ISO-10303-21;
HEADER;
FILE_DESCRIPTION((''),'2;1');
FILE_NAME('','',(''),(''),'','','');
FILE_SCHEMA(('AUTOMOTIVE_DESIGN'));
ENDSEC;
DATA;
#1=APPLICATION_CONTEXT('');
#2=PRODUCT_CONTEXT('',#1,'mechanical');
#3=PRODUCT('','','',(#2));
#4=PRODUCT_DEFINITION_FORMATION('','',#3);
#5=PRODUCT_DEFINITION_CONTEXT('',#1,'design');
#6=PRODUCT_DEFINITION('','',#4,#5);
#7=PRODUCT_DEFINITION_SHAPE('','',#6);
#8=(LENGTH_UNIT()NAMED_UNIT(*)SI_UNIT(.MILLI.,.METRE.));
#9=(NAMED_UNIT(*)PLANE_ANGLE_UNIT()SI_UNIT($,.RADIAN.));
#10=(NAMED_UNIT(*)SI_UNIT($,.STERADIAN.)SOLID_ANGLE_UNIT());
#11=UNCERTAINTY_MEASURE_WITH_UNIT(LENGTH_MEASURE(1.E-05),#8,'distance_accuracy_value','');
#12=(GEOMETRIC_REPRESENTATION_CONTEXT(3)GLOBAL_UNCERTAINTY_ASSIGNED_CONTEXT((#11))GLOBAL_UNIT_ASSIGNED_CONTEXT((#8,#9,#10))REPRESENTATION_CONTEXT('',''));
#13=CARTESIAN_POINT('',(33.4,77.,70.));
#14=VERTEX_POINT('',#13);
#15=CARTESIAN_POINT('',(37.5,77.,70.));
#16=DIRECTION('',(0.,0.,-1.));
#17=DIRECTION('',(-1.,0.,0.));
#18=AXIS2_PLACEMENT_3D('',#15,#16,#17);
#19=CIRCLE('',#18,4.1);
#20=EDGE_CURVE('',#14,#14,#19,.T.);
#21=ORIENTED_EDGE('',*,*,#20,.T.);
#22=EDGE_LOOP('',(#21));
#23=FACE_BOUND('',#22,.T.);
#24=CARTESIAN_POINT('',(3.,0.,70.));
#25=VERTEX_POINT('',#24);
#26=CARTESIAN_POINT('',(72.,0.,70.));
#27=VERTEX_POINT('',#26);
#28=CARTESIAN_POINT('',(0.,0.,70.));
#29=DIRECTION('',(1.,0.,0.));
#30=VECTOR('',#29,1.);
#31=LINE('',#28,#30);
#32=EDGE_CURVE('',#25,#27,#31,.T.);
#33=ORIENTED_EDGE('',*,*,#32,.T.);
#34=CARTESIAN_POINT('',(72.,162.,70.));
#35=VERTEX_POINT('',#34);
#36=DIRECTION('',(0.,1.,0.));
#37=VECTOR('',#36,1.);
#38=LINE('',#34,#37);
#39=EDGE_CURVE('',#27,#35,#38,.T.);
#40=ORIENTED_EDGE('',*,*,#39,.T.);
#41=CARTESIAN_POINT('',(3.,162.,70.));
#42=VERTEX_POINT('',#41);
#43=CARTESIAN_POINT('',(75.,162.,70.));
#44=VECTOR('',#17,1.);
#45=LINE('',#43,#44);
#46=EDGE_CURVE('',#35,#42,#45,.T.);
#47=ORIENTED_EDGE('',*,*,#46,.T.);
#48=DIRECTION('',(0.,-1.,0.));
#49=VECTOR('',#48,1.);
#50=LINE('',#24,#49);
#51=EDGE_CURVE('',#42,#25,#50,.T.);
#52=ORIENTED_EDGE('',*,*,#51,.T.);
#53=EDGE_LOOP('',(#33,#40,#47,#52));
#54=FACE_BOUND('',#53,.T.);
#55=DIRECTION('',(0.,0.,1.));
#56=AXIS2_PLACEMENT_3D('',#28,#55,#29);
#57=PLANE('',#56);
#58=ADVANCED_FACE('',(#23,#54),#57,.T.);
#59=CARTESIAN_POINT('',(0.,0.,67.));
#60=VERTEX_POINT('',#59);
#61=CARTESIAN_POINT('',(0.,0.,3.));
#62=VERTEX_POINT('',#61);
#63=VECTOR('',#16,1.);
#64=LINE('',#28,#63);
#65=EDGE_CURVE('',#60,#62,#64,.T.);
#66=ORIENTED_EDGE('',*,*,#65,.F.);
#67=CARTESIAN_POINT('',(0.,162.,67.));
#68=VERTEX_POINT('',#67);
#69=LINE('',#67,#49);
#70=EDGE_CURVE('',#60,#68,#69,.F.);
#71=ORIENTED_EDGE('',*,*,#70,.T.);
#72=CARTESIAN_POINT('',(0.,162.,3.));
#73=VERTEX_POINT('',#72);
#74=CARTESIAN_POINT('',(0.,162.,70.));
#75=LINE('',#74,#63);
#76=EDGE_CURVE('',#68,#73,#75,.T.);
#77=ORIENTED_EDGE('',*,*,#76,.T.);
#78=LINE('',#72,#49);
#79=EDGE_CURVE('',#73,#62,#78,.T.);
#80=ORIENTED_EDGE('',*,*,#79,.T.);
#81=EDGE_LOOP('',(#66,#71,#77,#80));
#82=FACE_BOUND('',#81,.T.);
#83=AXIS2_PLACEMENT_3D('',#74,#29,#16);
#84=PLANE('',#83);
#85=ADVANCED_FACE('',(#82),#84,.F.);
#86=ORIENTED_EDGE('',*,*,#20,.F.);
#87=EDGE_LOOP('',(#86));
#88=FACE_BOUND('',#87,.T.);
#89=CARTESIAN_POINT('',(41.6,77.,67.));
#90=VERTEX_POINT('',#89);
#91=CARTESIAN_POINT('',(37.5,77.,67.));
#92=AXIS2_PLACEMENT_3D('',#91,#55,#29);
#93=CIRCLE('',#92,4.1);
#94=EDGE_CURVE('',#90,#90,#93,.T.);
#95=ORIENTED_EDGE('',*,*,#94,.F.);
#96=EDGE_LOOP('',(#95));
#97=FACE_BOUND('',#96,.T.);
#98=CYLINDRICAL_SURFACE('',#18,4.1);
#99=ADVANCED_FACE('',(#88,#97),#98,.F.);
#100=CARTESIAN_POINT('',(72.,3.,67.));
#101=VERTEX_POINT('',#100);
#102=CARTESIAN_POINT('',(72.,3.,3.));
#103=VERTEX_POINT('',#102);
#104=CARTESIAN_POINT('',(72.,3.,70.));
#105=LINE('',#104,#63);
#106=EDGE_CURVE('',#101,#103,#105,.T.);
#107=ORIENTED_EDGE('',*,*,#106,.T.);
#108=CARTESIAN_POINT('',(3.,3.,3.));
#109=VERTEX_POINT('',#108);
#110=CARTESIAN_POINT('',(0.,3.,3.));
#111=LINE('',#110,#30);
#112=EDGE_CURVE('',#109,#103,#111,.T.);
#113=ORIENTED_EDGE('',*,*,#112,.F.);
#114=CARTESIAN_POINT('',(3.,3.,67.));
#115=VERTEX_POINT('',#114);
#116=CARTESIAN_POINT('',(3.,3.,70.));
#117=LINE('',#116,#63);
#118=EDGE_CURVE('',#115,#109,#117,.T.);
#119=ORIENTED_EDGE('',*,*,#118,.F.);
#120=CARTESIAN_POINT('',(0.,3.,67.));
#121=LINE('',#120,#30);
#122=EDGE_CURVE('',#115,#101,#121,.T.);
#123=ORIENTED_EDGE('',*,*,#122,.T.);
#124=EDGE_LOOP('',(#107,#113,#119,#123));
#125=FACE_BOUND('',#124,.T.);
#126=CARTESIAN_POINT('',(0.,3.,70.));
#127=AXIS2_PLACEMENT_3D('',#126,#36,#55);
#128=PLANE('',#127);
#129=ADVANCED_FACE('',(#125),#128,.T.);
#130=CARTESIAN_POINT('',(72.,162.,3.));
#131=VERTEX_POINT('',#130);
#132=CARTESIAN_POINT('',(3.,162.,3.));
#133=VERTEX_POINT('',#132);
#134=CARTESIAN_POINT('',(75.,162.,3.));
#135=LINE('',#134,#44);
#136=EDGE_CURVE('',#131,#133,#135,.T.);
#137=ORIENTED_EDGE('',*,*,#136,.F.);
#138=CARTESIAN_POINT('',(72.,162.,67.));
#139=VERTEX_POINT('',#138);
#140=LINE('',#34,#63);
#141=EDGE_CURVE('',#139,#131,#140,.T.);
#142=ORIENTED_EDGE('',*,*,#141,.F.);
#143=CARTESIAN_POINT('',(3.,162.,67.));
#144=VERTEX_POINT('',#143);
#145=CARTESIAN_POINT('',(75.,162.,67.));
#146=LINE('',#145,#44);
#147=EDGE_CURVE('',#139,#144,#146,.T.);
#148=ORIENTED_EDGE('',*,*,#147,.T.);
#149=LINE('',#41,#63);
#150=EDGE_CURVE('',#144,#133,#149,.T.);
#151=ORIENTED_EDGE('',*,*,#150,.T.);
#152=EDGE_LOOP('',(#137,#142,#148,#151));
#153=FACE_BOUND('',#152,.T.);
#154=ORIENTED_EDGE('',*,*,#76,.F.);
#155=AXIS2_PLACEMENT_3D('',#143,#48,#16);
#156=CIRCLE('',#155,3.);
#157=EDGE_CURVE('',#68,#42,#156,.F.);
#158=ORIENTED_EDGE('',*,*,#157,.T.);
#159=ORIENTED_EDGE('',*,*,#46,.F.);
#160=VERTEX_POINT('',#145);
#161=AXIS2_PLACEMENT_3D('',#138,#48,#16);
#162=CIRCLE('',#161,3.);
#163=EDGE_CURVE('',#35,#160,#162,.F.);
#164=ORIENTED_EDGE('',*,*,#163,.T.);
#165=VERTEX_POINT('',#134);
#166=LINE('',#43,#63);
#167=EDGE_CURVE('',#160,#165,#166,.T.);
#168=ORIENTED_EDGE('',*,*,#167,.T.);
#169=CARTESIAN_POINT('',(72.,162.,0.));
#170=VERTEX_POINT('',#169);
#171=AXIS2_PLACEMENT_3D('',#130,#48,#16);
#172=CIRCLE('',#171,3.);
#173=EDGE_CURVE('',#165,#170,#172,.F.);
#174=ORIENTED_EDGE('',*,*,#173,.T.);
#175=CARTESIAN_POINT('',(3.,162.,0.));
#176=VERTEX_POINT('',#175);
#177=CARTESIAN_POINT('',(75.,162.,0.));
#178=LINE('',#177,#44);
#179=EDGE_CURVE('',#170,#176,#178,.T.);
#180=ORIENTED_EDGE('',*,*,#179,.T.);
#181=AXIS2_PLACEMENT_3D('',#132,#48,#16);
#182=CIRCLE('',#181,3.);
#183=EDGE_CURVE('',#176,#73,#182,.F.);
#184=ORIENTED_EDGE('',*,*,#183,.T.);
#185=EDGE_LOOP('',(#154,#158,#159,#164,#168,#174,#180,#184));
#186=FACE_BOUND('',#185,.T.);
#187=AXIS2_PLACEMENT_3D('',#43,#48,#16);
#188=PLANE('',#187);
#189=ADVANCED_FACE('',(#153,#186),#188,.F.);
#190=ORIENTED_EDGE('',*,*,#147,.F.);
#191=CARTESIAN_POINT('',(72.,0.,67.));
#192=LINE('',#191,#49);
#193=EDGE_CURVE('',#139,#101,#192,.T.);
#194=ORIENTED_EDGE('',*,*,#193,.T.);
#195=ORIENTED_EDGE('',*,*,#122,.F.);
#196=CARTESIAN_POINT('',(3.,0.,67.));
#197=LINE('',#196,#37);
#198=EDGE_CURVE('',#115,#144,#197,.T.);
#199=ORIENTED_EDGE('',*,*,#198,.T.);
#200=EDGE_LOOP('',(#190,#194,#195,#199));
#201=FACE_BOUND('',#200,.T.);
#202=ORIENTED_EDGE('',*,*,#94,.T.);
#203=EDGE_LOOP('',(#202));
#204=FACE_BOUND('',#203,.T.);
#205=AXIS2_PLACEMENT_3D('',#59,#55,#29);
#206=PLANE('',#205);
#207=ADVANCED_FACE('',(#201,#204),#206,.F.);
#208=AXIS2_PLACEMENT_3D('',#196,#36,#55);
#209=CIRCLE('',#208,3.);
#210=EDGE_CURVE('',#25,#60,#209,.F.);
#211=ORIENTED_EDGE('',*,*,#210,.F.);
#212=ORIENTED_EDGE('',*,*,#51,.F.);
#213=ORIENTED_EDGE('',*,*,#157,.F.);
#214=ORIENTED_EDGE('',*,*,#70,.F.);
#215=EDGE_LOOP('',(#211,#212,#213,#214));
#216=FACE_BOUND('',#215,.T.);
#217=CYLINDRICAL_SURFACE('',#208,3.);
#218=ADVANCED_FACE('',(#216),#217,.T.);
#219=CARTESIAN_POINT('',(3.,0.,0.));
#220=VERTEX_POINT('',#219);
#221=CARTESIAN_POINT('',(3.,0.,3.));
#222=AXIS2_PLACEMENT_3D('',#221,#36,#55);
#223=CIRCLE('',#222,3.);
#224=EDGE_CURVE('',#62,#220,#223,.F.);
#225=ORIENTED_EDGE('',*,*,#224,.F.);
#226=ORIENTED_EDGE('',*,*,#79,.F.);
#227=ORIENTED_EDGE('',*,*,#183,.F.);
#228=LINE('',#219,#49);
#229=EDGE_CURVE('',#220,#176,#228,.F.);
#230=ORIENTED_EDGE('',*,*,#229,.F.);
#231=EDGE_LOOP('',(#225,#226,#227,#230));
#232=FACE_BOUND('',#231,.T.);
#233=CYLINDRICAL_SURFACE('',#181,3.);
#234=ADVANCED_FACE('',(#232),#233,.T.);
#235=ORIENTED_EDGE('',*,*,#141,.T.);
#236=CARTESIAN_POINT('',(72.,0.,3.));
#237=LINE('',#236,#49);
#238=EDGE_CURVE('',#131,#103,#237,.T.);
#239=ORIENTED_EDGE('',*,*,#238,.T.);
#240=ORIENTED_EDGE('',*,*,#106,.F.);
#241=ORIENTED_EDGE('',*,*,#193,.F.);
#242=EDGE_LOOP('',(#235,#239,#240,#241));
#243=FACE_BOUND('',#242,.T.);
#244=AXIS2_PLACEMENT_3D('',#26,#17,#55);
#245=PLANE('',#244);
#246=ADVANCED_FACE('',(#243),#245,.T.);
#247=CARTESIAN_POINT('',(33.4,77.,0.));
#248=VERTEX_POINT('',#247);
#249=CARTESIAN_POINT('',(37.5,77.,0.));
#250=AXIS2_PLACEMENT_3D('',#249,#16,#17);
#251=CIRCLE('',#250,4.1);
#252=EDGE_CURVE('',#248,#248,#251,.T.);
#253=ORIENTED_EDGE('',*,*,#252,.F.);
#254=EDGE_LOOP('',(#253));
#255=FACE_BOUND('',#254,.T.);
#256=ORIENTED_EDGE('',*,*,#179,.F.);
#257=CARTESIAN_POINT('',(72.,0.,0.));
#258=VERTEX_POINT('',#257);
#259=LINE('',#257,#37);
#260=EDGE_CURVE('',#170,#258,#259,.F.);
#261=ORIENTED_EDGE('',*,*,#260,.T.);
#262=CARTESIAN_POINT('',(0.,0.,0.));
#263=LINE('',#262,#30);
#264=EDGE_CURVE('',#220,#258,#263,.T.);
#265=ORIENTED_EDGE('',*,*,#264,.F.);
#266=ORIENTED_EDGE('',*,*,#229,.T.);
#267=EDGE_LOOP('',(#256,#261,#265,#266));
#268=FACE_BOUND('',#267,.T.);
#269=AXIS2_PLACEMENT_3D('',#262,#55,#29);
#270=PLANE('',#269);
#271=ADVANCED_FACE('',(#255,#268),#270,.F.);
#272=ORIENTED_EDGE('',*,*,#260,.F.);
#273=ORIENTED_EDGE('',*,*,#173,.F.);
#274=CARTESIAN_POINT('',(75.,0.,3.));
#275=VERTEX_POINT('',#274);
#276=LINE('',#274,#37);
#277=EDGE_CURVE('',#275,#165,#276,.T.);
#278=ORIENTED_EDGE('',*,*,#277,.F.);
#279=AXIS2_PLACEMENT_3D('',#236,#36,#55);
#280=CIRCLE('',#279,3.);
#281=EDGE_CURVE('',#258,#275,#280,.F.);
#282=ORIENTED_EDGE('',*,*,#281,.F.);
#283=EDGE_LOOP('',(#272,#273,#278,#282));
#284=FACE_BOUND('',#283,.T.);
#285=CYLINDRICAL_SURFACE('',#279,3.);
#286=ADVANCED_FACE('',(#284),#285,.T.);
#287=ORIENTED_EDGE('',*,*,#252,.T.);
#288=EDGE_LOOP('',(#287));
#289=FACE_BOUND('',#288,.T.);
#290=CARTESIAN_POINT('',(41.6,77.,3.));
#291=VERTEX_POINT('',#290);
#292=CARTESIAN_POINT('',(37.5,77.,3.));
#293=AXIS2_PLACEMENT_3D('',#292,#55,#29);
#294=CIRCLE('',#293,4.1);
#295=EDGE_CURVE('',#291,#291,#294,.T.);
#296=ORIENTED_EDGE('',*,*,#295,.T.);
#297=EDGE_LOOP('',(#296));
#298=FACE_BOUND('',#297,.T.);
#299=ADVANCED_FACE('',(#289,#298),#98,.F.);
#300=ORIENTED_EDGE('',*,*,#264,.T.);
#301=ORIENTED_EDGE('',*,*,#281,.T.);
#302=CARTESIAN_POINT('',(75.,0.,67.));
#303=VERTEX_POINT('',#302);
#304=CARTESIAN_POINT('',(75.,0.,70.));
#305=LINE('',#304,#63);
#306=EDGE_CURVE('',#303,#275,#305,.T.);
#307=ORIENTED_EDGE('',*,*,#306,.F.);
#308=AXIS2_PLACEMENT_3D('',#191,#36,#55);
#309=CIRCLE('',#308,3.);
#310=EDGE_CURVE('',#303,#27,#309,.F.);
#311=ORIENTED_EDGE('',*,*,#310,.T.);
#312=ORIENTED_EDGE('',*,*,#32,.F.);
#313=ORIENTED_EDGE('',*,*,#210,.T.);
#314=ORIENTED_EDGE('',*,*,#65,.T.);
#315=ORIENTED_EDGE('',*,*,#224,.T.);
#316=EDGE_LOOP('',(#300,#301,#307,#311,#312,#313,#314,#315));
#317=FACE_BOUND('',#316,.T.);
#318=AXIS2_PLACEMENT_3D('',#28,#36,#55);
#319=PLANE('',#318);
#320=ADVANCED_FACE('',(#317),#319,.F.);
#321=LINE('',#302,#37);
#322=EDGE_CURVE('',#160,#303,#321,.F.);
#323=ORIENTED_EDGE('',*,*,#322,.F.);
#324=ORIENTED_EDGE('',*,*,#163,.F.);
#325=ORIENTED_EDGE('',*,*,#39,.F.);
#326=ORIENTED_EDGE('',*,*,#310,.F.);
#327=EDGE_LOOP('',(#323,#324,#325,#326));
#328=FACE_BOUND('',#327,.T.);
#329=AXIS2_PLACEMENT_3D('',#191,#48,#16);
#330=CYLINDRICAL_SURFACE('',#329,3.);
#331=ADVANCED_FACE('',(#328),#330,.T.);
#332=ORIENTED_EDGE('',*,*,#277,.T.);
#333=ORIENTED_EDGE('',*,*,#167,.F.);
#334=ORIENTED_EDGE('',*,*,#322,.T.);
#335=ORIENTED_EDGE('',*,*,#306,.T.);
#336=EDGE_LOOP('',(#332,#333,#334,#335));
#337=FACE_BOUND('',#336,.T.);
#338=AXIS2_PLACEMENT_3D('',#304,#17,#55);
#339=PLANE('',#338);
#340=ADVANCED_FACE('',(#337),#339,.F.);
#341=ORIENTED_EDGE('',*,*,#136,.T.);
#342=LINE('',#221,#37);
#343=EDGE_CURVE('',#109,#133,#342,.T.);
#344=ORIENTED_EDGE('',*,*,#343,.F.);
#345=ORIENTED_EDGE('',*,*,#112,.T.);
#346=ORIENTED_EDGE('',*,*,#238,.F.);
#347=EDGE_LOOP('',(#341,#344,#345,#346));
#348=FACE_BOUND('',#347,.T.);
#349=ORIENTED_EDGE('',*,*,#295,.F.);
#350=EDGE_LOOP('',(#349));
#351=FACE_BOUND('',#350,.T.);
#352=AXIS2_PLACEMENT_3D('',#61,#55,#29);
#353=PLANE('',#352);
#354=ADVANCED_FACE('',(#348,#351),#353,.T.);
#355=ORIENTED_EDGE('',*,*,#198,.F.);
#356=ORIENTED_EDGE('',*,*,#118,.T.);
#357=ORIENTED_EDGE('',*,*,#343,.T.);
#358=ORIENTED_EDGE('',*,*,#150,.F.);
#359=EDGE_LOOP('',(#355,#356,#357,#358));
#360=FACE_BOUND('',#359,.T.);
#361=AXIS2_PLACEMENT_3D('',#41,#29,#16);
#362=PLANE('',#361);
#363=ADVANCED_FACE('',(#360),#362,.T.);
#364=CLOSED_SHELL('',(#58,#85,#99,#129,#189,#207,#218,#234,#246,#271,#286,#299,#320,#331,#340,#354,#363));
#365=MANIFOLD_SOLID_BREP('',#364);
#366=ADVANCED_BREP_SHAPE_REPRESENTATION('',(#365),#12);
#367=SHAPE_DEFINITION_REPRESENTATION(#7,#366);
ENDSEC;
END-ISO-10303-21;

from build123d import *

# Parameters (mm, degrees)
SKETCH_1_W         = 75
SKETCH_1_H         = 162
BLOCKEXTRUDE_DEPTH = 70
FILLET_2_R         = 3
SHELL_START        = 3
SHELL_1_OUTLINE_W  = 159
SHELL_1_OUTLINE_H  = 64
SHELL_1_DEPTH      = 69
SKETCH_2_R         = 4.1
CABLE_ENTRY_DEPTH  = 192.752444574


# Read off the part's stored shape, not the designer's step: 抽壳1
with BuildPart() as part:
    # 草图1 → BlockExtrude (new body)
    with BuildSketch(Plane.XY):
        with Locations((37.5, 81)):
            Rectangle(SKETCH_1_W, SKETCH_1_H)
    extrude(amount=BLOCKEXTRUDE_DEPTH)

    # Fillet 2
    fillet_2_edges = [part.edges().sort_by_distance(p)[0] for p in [
        (75, 81, 70),
        (0, 81, 70),
        (75, 81, 0),
        (0, 81, 0),
    ]]
    fillet(fillet_2_edges, radius=FILLET_2_R)

    # 抽壳1 outline → 抽壳1 (cut)
    with BuildSketch(Plane.YZ.offset(SHELL_START)):
        with Locations((82.5, 35)):
            Rectangle(SHELL_1_OUTLINE_W, SHELL_1_OUTLINE_H)
    extrude(amount=SHELL_1_DEPTH, mode=Mode.SUBTRACT)

    # 草图2 → Cable_entry (cut, through all)
    with BuildSketch(Plane(origin=(0, 0, 0), x_dir=(-1, 0, 0), z_dir=(0, 0, -1))):
        with Locations((-37.5, 77)):
            Circle(SKETCH_2_R)
    extrude(amount=-CABLE_ENTRY_DEPTH, mode=Mode.SUBTRACT)


solid = part.part
